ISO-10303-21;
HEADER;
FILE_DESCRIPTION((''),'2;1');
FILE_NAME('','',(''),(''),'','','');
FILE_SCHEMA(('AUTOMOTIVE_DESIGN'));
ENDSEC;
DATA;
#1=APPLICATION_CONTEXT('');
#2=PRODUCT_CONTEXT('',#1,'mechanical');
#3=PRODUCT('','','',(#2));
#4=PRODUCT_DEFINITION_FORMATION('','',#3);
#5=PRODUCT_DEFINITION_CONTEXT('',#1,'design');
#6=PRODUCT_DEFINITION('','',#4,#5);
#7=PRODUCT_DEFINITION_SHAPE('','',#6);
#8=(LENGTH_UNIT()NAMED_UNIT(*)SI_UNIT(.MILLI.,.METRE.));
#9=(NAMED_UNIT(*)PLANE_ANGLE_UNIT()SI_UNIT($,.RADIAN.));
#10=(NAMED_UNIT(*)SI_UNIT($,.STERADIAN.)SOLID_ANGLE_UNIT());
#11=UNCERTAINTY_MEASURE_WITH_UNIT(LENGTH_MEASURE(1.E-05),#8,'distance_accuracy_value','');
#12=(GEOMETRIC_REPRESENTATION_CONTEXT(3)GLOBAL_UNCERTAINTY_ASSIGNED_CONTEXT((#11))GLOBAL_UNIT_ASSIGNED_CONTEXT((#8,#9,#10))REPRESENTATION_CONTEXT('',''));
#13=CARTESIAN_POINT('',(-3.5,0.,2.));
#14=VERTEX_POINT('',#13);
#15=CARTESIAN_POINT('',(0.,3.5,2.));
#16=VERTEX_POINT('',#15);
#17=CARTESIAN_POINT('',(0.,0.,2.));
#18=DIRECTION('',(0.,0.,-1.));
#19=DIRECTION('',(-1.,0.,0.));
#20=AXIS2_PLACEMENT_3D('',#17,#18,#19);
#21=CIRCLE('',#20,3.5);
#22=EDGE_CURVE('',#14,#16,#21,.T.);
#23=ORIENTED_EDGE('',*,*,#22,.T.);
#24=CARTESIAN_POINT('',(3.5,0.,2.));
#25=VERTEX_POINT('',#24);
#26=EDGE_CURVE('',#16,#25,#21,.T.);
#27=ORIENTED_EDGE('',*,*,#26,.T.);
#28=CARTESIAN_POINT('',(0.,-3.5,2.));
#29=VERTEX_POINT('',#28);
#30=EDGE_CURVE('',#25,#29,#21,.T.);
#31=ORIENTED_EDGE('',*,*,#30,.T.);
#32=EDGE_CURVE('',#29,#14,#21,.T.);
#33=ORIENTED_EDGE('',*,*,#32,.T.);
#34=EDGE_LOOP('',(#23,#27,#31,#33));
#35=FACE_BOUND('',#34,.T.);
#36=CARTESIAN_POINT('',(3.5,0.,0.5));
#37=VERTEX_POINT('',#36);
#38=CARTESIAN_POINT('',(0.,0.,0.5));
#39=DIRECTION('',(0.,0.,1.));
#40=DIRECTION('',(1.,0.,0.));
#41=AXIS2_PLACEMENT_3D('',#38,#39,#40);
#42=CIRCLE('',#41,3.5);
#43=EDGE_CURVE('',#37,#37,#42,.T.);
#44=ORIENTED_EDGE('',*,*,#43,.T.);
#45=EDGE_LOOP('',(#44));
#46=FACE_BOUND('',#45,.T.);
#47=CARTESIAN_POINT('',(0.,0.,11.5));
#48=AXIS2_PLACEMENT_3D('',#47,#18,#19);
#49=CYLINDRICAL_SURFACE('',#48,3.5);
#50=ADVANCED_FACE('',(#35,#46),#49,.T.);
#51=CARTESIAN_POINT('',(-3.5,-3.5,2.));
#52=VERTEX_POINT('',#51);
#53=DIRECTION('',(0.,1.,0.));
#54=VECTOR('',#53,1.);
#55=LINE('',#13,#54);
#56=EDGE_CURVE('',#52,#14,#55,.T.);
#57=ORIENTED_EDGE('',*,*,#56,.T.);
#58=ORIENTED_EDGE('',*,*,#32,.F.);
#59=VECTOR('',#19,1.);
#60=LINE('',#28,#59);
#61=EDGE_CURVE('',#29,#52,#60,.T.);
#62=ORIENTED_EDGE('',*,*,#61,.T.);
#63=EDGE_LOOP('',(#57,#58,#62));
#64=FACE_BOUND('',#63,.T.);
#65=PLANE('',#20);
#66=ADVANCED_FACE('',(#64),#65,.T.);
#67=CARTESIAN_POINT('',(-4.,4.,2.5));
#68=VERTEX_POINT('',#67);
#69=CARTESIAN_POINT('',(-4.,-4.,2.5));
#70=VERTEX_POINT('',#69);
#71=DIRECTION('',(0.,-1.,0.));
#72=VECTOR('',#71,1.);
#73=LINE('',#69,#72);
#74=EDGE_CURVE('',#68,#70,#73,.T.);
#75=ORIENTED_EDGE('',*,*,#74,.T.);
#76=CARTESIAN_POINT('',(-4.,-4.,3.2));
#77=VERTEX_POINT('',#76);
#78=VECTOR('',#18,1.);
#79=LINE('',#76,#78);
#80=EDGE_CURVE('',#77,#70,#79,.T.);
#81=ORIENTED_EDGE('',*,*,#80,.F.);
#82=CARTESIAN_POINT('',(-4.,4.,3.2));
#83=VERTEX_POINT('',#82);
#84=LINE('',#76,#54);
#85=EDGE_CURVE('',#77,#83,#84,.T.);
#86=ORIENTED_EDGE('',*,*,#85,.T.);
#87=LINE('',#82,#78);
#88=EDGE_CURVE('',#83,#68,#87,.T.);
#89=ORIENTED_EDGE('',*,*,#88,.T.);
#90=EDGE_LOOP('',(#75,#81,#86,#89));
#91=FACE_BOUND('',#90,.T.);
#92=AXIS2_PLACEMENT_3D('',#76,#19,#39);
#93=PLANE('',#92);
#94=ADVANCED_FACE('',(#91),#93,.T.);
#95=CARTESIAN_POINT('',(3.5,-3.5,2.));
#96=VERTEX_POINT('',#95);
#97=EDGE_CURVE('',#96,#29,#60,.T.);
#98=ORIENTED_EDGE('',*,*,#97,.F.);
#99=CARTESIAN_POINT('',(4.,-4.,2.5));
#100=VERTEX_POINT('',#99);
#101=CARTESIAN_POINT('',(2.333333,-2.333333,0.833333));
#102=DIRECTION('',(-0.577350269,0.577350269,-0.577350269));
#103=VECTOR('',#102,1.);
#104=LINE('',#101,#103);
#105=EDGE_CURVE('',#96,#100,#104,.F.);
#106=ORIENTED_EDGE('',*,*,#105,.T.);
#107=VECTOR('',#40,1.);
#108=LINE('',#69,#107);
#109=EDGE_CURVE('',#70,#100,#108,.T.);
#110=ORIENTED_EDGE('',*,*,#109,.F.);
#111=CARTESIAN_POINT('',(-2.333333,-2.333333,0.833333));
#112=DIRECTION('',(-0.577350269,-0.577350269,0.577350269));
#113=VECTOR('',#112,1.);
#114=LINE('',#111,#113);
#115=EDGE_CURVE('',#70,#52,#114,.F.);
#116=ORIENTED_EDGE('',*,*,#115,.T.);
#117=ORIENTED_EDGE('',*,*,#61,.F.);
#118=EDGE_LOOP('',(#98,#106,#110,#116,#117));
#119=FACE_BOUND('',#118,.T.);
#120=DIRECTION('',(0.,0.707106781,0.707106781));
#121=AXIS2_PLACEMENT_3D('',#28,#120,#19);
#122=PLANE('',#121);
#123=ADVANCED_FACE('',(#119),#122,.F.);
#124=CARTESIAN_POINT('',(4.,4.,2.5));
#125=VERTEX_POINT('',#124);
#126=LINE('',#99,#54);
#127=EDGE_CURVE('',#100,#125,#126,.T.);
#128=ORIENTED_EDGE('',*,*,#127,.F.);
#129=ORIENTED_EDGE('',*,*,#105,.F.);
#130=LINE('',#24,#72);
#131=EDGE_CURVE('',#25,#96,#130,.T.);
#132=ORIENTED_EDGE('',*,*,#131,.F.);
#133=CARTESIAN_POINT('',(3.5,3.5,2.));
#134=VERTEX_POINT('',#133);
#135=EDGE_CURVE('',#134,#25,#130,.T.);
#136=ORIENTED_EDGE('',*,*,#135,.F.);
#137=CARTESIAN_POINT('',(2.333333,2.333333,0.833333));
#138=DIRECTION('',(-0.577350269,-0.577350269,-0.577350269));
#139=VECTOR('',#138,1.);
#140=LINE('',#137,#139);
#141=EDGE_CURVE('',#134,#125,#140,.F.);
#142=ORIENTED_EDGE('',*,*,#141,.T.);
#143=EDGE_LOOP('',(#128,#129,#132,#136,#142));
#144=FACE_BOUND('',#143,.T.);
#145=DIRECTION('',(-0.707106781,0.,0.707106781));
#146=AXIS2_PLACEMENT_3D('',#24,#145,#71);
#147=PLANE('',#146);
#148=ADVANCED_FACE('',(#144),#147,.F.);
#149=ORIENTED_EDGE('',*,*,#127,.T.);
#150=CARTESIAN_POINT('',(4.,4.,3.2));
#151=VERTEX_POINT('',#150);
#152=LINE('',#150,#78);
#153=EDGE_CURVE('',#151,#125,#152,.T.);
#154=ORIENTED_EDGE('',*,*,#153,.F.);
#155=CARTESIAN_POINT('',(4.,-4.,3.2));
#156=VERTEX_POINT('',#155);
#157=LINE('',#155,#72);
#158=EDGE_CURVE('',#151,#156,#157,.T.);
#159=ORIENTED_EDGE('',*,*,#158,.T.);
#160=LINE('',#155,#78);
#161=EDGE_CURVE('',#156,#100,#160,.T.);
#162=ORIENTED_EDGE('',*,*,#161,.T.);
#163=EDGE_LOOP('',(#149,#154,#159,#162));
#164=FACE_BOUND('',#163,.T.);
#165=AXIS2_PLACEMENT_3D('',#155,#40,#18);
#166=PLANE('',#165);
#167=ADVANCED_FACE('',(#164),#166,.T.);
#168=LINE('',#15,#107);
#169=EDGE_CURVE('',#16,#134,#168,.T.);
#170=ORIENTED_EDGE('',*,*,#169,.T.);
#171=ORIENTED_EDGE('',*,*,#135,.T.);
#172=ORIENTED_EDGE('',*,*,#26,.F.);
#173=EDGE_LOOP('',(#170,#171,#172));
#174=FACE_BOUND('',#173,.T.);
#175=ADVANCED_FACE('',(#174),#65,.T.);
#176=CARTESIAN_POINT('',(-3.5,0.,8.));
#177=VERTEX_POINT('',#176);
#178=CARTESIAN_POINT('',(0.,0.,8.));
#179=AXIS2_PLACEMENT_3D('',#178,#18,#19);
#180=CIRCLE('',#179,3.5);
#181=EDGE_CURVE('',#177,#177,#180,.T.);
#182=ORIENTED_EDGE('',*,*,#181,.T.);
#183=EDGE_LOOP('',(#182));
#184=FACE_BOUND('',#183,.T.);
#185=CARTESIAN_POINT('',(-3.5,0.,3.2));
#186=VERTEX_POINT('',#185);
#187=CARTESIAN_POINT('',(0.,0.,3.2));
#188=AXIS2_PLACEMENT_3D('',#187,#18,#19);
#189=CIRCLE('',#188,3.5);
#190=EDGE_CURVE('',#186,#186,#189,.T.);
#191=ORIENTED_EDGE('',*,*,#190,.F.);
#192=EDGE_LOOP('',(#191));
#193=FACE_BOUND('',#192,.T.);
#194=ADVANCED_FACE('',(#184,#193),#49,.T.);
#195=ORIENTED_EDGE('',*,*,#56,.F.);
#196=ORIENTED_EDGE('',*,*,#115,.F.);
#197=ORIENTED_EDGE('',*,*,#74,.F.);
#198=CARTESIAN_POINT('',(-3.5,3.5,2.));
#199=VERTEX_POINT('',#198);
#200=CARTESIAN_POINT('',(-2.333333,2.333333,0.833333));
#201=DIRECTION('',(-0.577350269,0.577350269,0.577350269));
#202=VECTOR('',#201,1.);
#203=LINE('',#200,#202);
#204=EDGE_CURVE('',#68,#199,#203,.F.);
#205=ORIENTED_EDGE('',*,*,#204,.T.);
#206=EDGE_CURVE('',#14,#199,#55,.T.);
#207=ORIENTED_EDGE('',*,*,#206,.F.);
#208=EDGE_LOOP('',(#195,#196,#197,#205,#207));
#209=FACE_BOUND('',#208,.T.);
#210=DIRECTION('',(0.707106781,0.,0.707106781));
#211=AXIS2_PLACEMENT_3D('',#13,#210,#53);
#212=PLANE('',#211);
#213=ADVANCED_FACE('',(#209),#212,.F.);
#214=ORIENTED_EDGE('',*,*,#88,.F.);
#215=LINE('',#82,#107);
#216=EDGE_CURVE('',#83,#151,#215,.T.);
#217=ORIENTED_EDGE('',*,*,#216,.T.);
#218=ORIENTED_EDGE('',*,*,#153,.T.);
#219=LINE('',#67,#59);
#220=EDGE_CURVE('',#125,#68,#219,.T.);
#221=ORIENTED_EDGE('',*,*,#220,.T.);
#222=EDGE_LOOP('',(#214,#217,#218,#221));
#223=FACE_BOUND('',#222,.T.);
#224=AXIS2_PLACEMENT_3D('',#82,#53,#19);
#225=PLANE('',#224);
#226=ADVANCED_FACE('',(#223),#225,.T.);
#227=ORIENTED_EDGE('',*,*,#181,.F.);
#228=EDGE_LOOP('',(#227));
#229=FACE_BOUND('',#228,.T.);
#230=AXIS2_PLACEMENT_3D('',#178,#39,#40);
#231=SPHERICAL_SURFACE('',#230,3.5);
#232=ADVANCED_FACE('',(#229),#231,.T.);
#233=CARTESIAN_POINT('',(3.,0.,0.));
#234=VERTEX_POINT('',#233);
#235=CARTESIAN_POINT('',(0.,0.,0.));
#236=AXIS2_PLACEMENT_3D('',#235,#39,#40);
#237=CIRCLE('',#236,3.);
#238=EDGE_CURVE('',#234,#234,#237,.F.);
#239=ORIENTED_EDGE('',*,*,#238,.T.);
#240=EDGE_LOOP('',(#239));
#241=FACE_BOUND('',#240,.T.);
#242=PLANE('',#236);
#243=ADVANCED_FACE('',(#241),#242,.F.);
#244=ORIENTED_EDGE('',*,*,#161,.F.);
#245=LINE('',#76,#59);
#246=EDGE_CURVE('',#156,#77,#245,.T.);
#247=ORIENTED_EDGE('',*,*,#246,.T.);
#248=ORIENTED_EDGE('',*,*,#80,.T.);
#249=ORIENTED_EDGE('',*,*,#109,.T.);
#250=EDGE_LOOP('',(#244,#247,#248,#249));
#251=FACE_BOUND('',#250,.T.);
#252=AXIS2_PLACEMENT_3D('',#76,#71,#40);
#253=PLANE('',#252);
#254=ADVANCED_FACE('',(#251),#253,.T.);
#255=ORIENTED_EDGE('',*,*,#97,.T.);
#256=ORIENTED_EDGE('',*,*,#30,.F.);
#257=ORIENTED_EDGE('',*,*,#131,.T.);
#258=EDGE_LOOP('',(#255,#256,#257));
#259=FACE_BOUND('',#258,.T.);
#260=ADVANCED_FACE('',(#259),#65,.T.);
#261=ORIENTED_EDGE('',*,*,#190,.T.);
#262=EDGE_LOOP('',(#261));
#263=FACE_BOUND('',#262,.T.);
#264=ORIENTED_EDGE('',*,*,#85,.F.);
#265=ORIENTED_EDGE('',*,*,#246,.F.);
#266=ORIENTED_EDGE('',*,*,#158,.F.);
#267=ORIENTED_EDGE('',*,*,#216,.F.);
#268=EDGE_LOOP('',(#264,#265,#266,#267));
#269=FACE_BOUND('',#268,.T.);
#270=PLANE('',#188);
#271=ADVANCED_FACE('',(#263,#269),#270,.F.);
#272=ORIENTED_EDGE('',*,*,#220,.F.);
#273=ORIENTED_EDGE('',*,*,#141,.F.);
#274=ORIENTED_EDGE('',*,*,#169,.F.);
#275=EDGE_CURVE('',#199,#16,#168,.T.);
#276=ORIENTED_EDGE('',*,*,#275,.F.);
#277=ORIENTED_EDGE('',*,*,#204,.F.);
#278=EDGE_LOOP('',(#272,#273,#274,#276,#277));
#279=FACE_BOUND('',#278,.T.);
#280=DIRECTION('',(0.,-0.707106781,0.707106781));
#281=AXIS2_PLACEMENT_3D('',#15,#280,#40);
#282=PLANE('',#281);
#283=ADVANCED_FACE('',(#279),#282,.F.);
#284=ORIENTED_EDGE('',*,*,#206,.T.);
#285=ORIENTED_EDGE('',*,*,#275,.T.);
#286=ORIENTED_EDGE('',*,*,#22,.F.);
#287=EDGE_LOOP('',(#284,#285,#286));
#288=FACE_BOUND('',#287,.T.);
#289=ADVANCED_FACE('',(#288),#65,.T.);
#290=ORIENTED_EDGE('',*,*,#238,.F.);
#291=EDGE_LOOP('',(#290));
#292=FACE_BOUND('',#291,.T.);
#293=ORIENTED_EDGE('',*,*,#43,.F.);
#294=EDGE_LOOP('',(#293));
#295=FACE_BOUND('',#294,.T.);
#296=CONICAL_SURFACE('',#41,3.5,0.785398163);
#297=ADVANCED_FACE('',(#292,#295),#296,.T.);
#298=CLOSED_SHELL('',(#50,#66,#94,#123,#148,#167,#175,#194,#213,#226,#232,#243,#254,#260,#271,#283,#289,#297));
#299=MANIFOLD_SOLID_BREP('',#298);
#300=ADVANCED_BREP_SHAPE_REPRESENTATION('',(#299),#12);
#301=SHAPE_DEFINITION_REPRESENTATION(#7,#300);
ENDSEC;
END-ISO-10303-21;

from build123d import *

# Parameters (mm, degrees)
SKETCH1_R           = 3.5
BOSS_EXTRUDE1_DEPTH = 11.5
FILLET1_R           = 3.5
SKETCH3_W           = 8
SKETCH3_H           = 8
BOSS_EXTRUDE2_DEPTH = 1.2
CHAMFER1_SIZE       = 0.5
CHAMFER2_SIZE       = 0.5


with BuildPart() as part:
    # Sketch1 → Boss-Extrude1 (new body)
    with BuildSketch(Plane.XY):
        Circle(SKETCH1_R)
    extrude(amount=BOSS_EXTRUDE1_DEPTH)

    # Fillet1
    fillet1_edges = [part.edges().sort_by_distance(p)[0] for p in [
        (-3.5, 0, 11.5),
    ]]
    fillet(fillet1_edges, radius=FILLET1_R)

    # Sketch3 → Boss-Extrude2 (add)
    with BuildSketch(Plane(origin=(0, 0, 2), x_dir=(-1, 0, 0), z_dir=(0, 0, -1))):
        Rectangle(SKETCH3_W, SKETCH3_H)
    extrude(amount=-BOSS_EXTRUDE2_DEPTH)

    # Chamfer1
    chamfer1_edges = [part.edges().sort_by_distance(p)[0] for p in [
        (-3.5, 0, 0),
    ]]
    chamfer(chamfer1_edges, length=CHAMFER1_SIZE)

    # Chamfer2
    chamfer2_edges = [part.edges().sort_by_distance(p)[0] for p in [
        (4, 0, 2),
        (0, -4, 2),
        (-4, 0, 2),
        (0, 4, 2),
    ]]
    chamfer(chamfer2_edges, length=CHAMFER2_SIZE - 0.0001)  # a hair under: the kernel refuses the full size


solid = part.part
